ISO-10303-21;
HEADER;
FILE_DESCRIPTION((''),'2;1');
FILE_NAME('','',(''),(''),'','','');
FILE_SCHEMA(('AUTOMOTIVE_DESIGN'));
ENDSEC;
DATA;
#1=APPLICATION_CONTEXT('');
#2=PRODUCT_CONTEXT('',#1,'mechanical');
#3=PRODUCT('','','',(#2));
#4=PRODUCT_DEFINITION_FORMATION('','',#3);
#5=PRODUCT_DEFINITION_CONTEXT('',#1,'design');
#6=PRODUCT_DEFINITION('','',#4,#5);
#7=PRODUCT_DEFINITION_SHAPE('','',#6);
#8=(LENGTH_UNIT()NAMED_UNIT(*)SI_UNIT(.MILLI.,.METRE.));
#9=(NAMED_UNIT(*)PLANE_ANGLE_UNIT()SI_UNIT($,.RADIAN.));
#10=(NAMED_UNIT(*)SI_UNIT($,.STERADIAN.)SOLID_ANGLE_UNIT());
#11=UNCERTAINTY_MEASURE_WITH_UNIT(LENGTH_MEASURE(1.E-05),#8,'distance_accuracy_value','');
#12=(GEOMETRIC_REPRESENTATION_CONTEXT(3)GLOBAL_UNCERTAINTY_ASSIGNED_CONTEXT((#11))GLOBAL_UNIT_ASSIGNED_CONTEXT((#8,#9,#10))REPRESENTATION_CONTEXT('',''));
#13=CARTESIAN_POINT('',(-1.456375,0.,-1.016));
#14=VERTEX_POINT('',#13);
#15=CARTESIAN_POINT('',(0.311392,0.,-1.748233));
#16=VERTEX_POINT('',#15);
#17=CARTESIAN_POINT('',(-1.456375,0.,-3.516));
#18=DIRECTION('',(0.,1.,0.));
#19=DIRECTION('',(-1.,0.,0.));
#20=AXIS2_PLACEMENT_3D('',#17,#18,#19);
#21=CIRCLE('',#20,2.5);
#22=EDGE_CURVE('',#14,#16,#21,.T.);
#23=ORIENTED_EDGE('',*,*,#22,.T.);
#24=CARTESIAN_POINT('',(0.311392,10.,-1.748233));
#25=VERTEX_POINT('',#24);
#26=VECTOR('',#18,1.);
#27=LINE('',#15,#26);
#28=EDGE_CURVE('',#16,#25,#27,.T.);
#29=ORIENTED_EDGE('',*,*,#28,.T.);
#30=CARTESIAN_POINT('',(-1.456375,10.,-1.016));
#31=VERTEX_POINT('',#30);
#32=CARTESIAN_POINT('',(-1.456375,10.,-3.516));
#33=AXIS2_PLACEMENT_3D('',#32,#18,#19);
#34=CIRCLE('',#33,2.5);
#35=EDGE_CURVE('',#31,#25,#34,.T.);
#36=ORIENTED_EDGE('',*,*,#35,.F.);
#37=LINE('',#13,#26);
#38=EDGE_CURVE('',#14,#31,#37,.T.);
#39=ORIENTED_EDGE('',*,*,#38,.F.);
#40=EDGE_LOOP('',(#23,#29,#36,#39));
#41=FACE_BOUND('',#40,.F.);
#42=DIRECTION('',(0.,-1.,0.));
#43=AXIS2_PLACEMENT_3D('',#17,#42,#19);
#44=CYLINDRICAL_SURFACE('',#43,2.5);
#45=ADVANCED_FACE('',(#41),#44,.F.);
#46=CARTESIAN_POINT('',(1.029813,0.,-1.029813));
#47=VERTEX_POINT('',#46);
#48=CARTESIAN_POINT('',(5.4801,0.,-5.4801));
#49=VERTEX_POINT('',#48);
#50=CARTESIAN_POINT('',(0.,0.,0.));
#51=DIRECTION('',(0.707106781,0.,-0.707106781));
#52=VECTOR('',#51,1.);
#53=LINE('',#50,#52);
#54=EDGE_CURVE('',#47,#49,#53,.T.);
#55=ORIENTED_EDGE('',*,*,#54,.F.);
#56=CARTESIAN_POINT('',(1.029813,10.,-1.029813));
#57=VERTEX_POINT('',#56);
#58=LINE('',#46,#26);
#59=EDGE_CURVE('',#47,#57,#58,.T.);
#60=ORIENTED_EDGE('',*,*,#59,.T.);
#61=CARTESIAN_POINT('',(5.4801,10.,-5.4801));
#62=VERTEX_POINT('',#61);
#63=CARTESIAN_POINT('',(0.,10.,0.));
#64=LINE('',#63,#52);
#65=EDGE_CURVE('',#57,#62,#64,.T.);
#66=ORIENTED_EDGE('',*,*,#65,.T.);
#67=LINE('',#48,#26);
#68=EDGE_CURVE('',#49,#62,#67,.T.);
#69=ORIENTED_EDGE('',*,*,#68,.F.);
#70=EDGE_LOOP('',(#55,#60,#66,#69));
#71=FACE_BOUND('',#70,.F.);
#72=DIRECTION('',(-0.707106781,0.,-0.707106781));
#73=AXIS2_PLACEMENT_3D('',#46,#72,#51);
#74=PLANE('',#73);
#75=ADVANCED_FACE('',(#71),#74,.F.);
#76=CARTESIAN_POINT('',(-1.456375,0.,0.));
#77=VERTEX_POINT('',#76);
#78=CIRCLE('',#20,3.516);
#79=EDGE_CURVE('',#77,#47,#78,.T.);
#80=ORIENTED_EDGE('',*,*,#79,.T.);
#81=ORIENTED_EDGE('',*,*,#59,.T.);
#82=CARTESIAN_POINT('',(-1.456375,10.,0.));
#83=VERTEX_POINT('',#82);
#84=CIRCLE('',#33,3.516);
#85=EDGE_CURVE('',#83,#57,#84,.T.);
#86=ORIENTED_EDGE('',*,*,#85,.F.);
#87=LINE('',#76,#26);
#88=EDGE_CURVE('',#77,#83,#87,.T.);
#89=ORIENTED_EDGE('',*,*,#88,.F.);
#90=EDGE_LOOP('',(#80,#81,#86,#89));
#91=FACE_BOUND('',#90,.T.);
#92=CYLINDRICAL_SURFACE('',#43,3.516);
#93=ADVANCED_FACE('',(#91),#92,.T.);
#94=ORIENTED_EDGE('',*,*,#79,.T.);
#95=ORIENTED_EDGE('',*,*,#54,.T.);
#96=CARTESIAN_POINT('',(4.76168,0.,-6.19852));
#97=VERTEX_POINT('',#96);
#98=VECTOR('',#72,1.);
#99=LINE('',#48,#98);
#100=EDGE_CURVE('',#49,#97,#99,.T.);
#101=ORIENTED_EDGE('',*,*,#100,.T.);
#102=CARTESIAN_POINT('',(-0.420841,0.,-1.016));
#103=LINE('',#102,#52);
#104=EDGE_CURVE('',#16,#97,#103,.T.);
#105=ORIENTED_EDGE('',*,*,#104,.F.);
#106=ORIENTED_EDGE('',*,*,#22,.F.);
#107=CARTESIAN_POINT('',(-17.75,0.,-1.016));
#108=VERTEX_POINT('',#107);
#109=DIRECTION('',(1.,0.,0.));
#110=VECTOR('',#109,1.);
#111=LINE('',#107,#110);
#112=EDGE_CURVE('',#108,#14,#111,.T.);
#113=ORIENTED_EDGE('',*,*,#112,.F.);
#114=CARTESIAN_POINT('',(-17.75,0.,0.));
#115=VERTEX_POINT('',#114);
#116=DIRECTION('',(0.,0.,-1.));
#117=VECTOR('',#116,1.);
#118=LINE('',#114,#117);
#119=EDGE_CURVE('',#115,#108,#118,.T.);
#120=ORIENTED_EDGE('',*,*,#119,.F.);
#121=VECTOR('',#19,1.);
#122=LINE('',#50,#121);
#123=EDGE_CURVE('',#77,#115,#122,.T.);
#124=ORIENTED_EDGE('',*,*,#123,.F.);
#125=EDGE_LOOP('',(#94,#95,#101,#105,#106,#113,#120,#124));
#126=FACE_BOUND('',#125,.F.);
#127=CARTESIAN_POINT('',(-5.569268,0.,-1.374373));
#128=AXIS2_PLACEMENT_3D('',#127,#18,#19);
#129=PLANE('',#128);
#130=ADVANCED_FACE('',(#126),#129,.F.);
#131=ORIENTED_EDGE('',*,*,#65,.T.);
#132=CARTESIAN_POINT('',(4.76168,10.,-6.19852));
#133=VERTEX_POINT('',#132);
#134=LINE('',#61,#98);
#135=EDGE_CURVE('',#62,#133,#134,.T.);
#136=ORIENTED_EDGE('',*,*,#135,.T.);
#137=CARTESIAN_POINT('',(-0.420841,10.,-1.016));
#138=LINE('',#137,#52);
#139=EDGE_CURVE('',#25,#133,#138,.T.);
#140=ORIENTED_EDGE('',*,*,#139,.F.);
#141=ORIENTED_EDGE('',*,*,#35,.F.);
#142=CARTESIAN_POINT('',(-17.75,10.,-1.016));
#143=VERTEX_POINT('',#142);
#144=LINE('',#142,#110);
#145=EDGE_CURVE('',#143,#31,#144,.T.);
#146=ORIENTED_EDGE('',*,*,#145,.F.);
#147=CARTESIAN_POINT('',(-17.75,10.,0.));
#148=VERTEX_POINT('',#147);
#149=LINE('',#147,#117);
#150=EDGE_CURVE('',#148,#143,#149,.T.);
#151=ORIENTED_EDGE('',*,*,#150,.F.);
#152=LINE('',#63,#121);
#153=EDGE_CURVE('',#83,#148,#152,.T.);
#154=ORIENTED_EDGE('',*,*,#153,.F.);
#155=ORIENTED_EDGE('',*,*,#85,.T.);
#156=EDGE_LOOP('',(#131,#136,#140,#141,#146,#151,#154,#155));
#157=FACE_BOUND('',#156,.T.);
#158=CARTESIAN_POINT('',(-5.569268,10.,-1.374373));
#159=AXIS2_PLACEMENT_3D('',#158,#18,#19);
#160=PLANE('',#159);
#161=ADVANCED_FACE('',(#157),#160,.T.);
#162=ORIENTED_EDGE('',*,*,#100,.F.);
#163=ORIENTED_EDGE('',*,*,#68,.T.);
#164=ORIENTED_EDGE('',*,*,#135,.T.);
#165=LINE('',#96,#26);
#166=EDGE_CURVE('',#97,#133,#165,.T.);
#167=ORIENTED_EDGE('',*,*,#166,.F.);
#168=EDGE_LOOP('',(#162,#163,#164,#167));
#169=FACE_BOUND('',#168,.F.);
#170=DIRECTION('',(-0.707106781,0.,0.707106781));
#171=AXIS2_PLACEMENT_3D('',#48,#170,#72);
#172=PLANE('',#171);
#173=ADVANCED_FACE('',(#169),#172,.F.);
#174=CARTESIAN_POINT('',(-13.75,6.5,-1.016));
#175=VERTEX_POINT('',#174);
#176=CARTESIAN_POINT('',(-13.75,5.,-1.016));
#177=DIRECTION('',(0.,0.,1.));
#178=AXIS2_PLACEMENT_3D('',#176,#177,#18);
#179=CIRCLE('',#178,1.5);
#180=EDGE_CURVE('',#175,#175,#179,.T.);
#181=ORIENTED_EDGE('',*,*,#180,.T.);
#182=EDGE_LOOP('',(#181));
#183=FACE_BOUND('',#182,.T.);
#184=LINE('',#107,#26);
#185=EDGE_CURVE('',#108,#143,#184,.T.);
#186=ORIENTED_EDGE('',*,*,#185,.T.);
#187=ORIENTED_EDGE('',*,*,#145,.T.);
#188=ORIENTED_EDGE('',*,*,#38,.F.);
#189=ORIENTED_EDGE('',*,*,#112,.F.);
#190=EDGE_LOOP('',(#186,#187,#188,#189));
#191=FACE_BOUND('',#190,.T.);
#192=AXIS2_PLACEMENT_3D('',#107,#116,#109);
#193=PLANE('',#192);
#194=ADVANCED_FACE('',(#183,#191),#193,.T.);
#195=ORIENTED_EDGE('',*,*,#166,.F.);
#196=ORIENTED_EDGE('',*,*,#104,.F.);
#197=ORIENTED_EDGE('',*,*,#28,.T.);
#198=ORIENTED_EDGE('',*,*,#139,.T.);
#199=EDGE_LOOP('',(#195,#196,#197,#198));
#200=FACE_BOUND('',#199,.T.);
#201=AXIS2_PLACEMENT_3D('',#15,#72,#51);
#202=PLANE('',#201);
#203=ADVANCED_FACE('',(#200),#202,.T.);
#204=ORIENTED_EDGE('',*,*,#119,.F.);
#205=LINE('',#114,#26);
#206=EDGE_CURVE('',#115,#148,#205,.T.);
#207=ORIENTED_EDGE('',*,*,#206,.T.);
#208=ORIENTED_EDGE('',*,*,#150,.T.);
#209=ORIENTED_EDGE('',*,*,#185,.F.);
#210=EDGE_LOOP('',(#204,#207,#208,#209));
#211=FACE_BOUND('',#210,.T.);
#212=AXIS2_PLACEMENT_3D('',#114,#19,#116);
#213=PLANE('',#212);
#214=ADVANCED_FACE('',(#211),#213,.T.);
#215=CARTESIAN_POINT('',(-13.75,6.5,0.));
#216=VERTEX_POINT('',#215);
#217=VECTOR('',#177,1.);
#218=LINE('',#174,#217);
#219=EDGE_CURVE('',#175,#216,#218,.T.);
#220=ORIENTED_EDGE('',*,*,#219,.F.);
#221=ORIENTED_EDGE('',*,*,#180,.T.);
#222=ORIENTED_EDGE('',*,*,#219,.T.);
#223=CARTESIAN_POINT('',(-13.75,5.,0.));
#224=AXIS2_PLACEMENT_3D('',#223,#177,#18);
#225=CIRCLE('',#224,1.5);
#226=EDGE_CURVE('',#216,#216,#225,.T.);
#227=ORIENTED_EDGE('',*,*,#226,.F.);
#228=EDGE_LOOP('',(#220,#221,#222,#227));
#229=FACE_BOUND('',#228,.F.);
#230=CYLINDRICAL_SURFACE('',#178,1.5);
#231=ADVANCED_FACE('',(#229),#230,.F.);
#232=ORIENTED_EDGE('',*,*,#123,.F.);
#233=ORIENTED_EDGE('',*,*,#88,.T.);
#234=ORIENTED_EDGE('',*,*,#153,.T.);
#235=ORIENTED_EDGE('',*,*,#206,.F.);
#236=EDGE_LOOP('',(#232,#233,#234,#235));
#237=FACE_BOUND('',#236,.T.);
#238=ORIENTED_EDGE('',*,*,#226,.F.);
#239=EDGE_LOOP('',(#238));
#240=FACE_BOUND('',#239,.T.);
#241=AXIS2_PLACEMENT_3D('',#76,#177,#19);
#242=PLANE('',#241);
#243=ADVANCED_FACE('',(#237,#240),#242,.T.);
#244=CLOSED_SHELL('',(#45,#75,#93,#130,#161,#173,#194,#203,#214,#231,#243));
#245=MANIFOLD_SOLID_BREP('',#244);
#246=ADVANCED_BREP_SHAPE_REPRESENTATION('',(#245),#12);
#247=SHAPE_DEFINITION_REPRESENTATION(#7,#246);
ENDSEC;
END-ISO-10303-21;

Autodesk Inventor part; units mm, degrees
ref_plane "YZ Plane" through (0, 0, 0) normal (1, 0, 0) x (0, 1, 0)
ref_plane "XZ Plane" through (0, 0, 0) normal (0, 1, 0) x (-1, 0, 0)
ref_plane "XY Plane" through (0, 0, 0) normal (0, 0, 1) x (1, 0, 0)
sketch "Sketch1" plane through (0, 0, 0) normal (0, 1, 0) x (-1, 0, 0)
  line L0 (0, 0) -> (-5.4801, -5.4801)
  line L1 (0, 0) -> (17.75, 0)
  dimension "d0" = 7.75
  dimension "d2" = 17.75
  dimension "d3" = 135
contour flange "Contour Flange1" sketch "Sketch1" thickness 1.016 bend radius 2.5 width 10 along (0, 1, 0) mid plane no both sides no wall seen from (2.74, 0, -2.74) lies toward (-0.7071068, 0, -0.7071068) curves L0 L1
bend "Bend1"
corner "Corner1"
sketch "Sketch2" plane through (-17.75, 0, -1.016) normal (0, 0, -1) x (-1, 0, 0)
  point P0 (-17.75, 0)
  point P1 (0, 0)
  point P2 (-4, 5)
  dimension "d15" = 5
  dimension "d16" = 4
hole "Hole1" at (-13.75, 5, -1.016) direction (0, 0, 1) diameter 3 end through all
equation "\"d22\" = Thickness"
equation "\"d4\" = Thickness"
equation "\"d5\" = BendReliefWidth"
equation "\"d6\" = BendReliefDepth"
equation "\"d7\" = MinimumRemnant"
equation "\"d8\" = TransitionRadius"
equation "\"d12\" = CornerReliefSize"
equation "\"d13\" = GapSize"
equation "\"d14\" = JacobiRadiusSize"
equation "\"BendRadius\" = Thickness"
equation "\"BendReliefWidth\" = Thickness"
equation "\"BendReliefDepth\" = 0.5 * Thickness"
equation "\"CornerReliefSize\" = 4 * Thickness"
equation "\"MinimumRemnant\" = 2 * Thickness"
equation "\"TransitionRadius\" = BendRadius"
equation "\"JacobiRadiusSize\" = BendRadius"
equation "\"GapSize\" = Thickness"
equation "\"Thickness\" = 1.016"
properties part number "Piston Flag" material "ABS Plastic"
